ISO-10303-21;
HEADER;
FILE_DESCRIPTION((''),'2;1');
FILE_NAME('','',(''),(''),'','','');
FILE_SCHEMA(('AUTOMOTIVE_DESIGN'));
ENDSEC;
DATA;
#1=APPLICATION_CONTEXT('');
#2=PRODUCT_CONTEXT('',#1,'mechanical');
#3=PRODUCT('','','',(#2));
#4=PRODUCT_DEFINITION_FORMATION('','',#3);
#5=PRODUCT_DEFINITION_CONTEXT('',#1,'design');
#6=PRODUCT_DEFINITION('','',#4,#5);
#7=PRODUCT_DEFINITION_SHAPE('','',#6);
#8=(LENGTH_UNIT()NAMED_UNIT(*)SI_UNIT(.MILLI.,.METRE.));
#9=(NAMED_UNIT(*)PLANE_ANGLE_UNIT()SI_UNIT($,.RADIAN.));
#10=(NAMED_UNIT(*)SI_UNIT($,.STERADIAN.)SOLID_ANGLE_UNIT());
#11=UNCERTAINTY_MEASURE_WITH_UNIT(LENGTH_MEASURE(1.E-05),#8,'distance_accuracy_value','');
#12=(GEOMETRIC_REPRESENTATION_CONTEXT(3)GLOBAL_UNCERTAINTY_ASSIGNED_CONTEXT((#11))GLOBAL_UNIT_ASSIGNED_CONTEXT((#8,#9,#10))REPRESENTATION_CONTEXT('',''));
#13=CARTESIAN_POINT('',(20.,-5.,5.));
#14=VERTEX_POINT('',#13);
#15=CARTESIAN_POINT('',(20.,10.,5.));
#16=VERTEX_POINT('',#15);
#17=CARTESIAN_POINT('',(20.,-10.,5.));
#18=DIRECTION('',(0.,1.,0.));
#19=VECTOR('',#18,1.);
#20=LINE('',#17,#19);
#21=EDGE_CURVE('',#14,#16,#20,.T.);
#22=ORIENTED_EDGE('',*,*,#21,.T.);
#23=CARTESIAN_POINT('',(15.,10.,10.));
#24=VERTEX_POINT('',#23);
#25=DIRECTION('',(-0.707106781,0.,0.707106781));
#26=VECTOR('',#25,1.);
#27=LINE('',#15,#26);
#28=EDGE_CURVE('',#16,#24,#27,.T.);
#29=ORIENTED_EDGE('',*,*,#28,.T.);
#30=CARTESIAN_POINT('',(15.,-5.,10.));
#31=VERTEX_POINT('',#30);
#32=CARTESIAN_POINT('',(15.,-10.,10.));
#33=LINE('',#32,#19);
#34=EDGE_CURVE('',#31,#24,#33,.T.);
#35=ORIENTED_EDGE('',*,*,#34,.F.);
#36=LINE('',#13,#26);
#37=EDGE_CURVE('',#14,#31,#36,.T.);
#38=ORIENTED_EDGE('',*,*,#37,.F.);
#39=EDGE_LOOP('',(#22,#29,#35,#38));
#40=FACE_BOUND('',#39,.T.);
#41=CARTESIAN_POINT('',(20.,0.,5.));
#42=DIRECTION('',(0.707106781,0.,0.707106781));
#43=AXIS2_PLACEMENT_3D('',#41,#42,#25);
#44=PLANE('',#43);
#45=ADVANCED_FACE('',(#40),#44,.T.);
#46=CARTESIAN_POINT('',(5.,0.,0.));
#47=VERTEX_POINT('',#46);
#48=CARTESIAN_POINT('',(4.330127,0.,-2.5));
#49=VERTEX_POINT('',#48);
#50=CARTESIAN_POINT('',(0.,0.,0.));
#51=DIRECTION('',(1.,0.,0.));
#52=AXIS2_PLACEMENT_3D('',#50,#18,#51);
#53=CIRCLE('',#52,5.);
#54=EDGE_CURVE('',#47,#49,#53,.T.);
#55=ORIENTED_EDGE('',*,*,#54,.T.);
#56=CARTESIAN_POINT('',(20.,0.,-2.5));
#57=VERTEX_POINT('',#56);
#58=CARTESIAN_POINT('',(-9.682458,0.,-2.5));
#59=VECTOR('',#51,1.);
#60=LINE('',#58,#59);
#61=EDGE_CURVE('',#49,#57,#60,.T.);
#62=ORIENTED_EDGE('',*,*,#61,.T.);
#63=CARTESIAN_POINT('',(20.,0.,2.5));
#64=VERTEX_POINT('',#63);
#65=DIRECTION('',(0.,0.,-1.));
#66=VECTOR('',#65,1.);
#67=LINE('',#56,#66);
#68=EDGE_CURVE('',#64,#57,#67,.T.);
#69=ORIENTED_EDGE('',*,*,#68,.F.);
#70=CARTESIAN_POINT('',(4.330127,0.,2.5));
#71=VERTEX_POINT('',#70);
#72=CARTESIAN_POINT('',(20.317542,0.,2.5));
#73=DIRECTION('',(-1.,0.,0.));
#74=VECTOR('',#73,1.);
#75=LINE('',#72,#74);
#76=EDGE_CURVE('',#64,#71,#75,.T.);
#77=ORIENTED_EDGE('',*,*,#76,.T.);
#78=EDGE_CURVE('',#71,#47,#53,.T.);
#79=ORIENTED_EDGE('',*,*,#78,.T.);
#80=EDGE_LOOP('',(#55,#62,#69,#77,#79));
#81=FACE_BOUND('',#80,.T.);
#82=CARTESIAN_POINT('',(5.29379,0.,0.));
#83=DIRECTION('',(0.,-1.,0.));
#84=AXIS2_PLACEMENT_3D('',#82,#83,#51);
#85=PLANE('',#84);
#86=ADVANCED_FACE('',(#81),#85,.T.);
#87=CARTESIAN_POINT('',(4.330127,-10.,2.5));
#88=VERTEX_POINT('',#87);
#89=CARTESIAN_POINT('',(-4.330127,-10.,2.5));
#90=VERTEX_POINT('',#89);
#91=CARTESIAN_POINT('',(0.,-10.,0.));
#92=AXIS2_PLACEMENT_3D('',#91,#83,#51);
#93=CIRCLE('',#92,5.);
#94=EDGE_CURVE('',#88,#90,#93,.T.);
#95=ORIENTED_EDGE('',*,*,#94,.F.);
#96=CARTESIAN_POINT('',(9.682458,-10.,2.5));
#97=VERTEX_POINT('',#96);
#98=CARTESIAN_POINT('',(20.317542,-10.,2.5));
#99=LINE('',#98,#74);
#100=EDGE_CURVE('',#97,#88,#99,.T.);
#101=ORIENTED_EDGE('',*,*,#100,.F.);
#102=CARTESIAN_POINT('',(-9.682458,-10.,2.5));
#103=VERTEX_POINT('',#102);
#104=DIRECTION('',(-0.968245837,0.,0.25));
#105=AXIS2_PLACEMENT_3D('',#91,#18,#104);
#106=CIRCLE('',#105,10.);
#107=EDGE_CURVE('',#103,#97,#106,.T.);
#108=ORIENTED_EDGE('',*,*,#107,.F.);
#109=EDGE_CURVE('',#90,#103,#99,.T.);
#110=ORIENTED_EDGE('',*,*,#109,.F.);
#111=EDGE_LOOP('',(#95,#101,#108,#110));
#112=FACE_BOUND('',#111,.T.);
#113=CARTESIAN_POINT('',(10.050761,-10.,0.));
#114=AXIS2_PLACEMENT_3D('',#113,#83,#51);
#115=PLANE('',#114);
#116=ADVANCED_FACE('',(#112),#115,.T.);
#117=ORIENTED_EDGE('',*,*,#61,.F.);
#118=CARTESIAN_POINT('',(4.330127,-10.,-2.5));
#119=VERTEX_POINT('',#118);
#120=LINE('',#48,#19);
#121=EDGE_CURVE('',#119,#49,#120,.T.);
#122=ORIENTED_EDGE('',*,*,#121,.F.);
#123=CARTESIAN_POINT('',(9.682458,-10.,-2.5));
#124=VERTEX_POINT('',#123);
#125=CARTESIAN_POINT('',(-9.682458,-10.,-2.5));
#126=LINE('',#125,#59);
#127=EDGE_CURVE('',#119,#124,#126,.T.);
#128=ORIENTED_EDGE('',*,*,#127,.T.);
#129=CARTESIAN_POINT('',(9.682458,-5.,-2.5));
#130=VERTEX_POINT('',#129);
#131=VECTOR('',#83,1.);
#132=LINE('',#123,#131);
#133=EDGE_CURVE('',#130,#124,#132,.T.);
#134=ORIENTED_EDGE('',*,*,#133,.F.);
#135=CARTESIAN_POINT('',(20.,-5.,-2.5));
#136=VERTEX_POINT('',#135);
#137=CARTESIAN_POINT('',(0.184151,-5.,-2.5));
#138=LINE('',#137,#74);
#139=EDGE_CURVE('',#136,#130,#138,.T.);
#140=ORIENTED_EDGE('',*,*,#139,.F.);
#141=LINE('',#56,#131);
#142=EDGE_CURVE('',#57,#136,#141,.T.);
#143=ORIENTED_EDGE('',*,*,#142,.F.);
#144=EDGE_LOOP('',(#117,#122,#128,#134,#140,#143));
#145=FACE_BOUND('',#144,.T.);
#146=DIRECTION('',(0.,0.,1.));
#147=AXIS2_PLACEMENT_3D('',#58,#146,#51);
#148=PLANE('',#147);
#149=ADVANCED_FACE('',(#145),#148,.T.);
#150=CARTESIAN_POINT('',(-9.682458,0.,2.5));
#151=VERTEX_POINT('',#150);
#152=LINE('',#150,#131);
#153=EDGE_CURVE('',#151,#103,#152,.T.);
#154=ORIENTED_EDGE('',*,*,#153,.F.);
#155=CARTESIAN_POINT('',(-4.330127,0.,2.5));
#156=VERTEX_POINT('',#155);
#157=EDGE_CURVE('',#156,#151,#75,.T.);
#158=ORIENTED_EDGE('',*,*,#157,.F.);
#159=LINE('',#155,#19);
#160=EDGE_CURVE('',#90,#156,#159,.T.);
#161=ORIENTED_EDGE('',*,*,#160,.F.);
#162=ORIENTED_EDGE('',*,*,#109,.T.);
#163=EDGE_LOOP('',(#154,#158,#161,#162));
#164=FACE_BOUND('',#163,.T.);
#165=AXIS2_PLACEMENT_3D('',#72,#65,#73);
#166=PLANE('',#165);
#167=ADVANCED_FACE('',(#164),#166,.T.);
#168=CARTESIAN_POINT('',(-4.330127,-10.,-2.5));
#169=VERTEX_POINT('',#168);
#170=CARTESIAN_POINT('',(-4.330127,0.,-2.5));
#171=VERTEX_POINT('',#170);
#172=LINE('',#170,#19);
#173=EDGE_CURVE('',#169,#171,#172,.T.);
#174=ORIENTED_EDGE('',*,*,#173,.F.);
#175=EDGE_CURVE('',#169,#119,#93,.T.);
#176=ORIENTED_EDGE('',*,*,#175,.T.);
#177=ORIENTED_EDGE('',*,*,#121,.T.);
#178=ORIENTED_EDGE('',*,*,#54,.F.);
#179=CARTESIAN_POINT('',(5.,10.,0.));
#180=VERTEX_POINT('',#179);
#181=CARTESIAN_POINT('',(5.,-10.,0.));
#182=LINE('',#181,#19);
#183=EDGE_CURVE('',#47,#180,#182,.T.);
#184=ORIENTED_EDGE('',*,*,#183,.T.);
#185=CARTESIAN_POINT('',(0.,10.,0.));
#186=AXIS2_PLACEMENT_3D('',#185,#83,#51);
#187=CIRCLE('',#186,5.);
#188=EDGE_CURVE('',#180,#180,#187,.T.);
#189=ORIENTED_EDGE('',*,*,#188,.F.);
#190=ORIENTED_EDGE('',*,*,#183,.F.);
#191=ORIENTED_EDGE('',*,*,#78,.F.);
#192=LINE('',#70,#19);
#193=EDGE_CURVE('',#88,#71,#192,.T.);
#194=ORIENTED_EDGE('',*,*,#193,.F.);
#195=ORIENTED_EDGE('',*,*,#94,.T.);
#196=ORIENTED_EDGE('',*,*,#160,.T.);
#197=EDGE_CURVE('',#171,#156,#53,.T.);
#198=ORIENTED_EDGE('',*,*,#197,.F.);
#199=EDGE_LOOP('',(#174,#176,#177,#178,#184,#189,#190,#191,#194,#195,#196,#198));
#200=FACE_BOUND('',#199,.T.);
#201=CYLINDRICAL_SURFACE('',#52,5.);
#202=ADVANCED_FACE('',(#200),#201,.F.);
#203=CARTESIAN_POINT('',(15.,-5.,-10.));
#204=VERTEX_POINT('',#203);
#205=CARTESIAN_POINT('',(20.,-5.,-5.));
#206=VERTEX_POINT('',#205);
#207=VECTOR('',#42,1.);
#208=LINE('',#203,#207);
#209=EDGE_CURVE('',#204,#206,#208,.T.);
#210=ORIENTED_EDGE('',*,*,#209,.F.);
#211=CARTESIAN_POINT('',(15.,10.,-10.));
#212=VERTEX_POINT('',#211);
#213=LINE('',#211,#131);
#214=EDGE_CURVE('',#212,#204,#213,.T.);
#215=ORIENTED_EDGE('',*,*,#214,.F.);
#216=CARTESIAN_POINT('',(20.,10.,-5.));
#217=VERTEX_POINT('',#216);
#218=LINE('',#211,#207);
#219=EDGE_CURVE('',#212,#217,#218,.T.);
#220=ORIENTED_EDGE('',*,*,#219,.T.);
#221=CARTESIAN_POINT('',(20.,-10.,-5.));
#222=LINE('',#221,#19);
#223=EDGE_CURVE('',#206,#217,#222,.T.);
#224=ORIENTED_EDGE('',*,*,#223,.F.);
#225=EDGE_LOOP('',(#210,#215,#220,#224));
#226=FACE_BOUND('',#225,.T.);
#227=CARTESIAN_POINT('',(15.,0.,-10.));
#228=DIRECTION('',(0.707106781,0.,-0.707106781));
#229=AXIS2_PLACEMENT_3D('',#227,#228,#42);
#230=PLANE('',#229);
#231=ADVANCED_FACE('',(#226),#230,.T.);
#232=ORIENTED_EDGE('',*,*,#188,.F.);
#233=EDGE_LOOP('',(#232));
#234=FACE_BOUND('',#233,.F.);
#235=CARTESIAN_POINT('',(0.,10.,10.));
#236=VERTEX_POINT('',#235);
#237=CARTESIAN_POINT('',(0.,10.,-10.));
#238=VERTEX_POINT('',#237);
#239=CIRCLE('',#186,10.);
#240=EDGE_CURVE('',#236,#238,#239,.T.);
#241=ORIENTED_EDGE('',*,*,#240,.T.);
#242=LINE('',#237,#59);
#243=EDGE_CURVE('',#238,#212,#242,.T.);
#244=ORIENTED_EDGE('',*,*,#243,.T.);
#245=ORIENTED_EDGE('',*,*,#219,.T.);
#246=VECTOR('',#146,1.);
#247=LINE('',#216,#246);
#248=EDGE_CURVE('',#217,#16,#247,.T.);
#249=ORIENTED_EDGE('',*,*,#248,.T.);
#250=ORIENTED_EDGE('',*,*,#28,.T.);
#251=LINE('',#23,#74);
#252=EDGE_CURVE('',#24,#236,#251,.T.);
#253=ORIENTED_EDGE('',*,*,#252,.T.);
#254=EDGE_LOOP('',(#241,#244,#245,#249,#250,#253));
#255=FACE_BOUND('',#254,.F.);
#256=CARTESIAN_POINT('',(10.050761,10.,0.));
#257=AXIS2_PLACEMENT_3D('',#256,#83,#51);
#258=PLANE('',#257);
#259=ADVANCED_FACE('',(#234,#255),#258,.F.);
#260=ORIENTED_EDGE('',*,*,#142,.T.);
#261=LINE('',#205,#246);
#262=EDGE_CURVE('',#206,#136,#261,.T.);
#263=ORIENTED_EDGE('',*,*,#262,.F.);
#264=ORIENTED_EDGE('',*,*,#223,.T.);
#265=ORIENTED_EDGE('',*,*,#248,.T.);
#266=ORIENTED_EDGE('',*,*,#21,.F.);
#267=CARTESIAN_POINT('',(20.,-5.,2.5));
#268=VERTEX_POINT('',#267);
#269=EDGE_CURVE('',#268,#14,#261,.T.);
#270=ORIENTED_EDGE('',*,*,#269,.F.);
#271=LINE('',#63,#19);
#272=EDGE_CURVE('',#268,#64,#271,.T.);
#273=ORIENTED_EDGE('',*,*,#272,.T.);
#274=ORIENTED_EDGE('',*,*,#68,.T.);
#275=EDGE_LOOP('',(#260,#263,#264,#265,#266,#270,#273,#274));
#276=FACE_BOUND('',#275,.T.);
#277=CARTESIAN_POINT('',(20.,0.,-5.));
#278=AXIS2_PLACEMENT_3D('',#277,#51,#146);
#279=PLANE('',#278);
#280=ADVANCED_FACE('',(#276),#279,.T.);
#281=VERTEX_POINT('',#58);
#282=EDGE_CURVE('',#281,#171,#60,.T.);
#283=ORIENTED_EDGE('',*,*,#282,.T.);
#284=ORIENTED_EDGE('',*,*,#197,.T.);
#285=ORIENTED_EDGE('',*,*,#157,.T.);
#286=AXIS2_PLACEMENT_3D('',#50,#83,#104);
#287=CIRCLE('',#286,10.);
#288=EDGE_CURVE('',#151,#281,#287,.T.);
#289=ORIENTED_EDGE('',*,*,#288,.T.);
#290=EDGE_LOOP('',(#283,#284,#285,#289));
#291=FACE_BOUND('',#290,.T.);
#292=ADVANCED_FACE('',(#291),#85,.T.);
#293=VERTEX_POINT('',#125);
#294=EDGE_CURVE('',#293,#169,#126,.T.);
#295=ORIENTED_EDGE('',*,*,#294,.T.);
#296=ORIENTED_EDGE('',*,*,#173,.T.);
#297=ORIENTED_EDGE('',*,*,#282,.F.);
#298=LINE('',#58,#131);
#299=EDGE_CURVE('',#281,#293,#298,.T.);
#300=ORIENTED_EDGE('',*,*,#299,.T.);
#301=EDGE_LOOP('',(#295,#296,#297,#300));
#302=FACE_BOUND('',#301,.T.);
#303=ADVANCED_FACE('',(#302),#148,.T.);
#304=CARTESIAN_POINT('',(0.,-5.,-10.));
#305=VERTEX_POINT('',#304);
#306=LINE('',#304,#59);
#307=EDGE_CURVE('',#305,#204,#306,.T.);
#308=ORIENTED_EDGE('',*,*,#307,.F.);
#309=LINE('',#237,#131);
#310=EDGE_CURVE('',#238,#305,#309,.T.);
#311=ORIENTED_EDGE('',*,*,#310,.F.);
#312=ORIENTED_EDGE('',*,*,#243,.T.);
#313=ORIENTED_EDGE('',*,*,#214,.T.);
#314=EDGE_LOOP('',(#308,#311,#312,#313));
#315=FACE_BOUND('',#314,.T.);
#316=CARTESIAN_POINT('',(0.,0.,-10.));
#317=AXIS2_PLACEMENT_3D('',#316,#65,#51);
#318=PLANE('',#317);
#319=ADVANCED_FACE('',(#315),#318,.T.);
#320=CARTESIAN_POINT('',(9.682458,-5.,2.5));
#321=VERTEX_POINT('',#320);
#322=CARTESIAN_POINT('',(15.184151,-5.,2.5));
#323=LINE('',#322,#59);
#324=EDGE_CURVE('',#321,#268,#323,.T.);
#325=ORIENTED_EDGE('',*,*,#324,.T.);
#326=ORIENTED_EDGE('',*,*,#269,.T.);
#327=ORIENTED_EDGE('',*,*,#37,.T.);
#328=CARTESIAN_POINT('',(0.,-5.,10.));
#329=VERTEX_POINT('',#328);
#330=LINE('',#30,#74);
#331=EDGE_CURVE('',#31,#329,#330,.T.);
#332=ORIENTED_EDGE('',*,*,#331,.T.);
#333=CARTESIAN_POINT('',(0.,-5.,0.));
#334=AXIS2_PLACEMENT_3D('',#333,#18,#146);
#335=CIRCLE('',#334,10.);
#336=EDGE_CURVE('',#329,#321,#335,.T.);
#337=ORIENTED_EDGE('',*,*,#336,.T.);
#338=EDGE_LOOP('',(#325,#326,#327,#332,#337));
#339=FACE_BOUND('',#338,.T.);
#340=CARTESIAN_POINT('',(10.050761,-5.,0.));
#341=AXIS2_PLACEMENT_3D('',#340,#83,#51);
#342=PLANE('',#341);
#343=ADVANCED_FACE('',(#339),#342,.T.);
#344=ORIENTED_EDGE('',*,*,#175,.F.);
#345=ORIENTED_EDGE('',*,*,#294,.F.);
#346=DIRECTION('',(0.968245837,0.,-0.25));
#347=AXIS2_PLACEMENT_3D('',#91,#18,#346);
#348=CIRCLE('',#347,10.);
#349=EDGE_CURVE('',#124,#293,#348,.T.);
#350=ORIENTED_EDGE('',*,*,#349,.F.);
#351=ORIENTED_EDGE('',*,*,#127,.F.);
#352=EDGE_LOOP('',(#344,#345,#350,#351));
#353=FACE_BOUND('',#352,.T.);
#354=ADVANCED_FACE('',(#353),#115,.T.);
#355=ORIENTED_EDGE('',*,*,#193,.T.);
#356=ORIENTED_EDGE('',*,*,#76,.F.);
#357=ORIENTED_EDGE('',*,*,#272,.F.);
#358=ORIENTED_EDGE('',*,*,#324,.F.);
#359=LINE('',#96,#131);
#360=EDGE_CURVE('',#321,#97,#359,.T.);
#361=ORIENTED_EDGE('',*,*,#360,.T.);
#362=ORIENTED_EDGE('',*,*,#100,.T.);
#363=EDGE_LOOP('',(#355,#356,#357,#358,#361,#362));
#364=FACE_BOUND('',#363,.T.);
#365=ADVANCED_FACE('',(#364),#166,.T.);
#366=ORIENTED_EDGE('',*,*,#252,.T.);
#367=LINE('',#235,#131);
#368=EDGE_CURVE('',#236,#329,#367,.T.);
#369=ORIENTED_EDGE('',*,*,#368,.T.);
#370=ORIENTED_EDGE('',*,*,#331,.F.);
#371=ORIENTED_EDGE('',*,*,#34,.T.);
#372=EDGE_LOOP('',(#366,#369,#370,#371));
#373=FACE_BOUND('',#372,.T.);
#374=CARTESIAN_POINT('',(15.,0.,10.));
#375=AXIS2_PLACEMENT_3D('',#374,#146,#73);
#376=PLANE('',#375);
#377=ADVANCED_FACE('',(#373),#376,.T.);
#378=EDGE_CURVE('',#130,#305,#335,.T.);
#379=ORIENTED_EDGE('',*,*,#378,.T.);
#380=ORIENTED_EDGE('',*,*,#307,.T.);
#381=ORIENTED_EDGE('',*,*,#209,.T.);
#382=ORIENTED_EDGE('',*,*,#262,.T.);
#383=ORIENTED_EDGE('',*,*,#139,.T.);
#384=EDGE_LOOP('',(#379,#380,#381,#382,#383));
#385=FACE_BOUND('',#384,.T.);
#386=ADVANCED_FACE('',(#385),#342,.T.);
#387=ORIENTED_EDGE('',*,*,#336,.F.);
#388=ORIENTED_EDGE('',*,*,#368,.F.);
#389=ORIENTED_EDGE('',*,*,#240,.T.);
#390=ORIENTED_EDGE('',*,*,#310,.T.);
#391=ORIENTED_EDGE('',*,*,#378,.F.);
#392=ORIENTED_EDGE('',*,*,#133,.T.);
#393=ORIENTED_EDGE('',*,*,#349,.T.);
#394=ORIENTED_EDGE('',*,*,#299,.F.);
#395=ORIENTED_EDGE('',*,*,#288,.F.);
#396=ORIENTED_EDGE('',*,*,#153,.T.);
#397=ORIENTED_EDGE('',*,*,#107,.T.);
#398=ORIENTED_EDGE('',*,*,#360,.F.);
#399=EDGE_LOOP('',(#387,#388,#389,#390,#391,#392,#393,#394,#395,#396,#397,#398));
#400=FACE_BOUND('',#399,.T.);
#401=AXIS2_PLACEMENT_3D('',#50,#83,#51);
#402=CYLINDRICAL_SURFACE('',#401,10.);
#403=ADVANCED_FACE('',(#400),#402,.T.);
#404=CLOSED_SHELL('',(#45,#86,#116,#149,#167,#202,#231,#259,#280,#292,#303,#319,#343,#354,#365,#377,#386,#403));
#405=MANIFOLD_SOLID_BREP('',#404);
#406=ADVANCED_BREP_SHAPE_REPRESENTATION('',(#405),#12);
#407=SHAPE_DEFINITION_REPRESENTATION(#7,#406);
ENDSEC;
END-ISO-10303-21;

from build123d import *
from build123d import SkipClean  # not in build123d's __all__

# Parameters (mm, degrees)
F0_R     = 10
F0_R_2   = 5
F1_DEPTH = 10
F3_DEPTH = 10
F5_DEPTH = 5
F7_DEPTH = 10


with BuildPart() as f1:
    # F0 (on Front) → F1 (new body, symmetric)
    with BuildSketch(Plane.XZ):
        Circle(F0_R)
        Circle(F0_R_2, mode=Mode.SUBTRACT)
    extrude(amount=F1_DEPTH, both=True)

    # F2 (on Front) → F3 (join, symmetric)
    with BuildSketch(Plane.XZ):
        with BuildLine():
            Line((15, 10), (0, 10))
            ThreePointArc((0, 10), (10, 0), (0, -10))
            Line((0, -10), (15, -10))
            Line((15, -10), (20, -5))
            Line((20, -5), (20, 5))
            Line((20, 5), (15, 10))
        make_face()
    extrude(amount=F3_DEPTH, both=True)

    # F4 (on face) → F5 (cut)
    with BuildSketch(Plane.XZ.offset(10)):
        with BuildLine():
            ThreePointArc((0, 10), (10, 0), (0, -10))
            Line((0, -10), (15, -10))
            Line((15, -10), (20, -5))
            Line((20, -5), (20, 5))
            Line((20, 5), (15, 10))
            Line((15, 10), (0, 10))
        make_face()
    with SkipClean():  # cleaning this boolean's faces spoils the solid; the shape is the same uncleaned
        extrude(amount=-F5_DEPTH, mode=Mode.SUBTRACT)

    # F6 (on Front) → F7 (cut)
    with BuildSketch(Plane.XZ):
        with BuildLine():
            Line((20.3175416345, 2.5), (-9.6824583655, 2.5))
            ThreePointArc((-9.6824583655, 2.5), (-10, 0), (-9.6824583655, -2.5))
            Line((-9.6824583655, -2.5), (20.3175416345, -2.5))
            Line((20.3175416345, -2.5), (20.3175416345, 2.5))
        make_face()
    extrude(amount=F7_DEPTH, mode=Mode.SUBTRACT)


solid = f1.part
